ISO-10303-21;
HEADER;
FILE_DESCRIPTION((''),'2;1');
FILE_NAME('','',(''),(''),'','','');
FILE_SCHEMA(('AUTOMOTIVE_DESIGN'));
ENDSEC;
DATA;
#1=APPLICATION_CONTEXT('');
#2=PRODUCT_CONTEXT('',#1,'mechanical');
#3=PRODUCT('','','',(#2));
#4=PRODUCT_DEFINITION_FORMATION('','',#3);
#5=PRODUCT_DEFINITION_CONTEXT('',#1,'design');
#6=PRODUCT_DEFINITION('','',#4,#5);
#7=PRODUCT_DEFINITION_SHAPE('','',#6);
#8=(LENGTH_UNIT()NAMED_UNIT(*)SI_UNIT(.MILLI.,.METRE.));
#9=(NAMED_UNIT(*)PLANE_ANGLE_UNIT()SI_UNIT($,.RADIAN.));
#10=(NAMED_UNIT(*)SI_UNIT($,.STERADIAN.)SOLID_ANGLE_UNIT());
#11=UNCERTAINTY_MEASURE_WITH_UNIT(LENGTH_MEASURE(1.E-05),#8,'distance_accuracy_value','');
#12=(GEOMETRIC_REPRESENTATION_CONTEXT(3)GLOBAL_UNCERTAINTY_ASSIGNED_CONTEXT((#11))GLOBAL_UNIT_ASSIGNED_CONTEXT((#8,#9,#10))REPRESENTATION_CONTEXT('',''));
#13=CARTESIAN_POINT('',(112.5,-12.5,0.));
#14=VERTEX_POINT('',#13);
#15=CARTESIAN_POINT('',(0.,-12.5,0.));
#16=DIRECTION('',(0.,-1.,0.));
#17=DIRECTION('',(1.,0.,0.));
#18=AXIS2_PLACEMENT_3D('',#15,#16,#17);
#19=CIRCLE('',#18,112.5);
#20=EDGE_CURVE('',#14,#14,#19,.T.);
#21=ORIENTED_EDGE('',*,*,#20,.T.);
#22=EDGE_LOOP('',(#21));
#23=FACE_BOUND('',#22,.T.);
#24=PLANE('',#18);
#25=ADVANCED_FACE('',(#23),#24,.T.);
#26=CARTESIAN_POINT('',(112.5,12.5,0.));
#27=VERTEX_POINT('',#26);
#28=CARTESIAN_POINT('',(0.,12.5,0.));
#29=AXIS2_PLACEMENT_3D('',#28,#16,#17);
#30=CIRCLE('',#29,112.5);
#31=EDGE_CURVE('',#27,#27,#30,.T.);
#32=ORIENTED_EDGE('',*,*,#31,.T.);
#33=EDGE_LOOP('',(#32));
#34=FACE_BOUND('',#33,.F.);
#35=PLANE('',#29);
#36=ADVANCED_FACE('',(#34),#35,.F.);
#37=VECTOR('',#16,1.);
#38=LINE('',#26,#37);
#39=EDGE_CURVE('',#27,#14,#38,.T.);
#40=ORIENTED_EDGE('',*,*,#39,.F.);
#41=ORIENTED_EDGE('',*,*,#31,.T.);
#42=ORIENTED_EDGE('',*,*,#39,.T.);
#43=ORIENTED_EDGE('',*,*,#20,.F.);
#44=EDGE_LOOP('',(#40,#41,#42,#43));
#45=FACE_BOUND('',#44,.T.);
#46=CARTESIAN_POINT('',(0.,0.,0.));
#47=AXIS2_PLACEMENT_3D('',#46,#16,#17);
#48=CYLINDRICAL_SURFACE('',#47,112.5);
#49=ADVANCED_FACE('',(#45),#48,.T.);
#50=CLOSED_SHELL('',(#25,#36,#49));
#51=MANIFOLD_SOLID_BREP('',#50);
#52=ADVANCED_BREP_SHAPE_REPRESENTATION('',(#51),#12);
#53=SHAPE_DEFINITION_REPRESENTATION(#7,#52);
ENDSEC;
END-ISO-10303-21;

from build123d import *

# Parameters (mm, degrees)
F0_R     = 112.5
F5_DEPTH = 12.5


# Not quite as in the source:
# - the program builds the solid bodies; features that only make, move or delete a surface that nothing else refers to are left out


with BuildPart() as f5:
    # F0 (on Front) → F5 (new body, symmetric)
    with BuildSketch(Plane.XZ):
        Circle(F0_R)
    extrude(amount=F5_DEPTH, both=True)


solid = f5.part
